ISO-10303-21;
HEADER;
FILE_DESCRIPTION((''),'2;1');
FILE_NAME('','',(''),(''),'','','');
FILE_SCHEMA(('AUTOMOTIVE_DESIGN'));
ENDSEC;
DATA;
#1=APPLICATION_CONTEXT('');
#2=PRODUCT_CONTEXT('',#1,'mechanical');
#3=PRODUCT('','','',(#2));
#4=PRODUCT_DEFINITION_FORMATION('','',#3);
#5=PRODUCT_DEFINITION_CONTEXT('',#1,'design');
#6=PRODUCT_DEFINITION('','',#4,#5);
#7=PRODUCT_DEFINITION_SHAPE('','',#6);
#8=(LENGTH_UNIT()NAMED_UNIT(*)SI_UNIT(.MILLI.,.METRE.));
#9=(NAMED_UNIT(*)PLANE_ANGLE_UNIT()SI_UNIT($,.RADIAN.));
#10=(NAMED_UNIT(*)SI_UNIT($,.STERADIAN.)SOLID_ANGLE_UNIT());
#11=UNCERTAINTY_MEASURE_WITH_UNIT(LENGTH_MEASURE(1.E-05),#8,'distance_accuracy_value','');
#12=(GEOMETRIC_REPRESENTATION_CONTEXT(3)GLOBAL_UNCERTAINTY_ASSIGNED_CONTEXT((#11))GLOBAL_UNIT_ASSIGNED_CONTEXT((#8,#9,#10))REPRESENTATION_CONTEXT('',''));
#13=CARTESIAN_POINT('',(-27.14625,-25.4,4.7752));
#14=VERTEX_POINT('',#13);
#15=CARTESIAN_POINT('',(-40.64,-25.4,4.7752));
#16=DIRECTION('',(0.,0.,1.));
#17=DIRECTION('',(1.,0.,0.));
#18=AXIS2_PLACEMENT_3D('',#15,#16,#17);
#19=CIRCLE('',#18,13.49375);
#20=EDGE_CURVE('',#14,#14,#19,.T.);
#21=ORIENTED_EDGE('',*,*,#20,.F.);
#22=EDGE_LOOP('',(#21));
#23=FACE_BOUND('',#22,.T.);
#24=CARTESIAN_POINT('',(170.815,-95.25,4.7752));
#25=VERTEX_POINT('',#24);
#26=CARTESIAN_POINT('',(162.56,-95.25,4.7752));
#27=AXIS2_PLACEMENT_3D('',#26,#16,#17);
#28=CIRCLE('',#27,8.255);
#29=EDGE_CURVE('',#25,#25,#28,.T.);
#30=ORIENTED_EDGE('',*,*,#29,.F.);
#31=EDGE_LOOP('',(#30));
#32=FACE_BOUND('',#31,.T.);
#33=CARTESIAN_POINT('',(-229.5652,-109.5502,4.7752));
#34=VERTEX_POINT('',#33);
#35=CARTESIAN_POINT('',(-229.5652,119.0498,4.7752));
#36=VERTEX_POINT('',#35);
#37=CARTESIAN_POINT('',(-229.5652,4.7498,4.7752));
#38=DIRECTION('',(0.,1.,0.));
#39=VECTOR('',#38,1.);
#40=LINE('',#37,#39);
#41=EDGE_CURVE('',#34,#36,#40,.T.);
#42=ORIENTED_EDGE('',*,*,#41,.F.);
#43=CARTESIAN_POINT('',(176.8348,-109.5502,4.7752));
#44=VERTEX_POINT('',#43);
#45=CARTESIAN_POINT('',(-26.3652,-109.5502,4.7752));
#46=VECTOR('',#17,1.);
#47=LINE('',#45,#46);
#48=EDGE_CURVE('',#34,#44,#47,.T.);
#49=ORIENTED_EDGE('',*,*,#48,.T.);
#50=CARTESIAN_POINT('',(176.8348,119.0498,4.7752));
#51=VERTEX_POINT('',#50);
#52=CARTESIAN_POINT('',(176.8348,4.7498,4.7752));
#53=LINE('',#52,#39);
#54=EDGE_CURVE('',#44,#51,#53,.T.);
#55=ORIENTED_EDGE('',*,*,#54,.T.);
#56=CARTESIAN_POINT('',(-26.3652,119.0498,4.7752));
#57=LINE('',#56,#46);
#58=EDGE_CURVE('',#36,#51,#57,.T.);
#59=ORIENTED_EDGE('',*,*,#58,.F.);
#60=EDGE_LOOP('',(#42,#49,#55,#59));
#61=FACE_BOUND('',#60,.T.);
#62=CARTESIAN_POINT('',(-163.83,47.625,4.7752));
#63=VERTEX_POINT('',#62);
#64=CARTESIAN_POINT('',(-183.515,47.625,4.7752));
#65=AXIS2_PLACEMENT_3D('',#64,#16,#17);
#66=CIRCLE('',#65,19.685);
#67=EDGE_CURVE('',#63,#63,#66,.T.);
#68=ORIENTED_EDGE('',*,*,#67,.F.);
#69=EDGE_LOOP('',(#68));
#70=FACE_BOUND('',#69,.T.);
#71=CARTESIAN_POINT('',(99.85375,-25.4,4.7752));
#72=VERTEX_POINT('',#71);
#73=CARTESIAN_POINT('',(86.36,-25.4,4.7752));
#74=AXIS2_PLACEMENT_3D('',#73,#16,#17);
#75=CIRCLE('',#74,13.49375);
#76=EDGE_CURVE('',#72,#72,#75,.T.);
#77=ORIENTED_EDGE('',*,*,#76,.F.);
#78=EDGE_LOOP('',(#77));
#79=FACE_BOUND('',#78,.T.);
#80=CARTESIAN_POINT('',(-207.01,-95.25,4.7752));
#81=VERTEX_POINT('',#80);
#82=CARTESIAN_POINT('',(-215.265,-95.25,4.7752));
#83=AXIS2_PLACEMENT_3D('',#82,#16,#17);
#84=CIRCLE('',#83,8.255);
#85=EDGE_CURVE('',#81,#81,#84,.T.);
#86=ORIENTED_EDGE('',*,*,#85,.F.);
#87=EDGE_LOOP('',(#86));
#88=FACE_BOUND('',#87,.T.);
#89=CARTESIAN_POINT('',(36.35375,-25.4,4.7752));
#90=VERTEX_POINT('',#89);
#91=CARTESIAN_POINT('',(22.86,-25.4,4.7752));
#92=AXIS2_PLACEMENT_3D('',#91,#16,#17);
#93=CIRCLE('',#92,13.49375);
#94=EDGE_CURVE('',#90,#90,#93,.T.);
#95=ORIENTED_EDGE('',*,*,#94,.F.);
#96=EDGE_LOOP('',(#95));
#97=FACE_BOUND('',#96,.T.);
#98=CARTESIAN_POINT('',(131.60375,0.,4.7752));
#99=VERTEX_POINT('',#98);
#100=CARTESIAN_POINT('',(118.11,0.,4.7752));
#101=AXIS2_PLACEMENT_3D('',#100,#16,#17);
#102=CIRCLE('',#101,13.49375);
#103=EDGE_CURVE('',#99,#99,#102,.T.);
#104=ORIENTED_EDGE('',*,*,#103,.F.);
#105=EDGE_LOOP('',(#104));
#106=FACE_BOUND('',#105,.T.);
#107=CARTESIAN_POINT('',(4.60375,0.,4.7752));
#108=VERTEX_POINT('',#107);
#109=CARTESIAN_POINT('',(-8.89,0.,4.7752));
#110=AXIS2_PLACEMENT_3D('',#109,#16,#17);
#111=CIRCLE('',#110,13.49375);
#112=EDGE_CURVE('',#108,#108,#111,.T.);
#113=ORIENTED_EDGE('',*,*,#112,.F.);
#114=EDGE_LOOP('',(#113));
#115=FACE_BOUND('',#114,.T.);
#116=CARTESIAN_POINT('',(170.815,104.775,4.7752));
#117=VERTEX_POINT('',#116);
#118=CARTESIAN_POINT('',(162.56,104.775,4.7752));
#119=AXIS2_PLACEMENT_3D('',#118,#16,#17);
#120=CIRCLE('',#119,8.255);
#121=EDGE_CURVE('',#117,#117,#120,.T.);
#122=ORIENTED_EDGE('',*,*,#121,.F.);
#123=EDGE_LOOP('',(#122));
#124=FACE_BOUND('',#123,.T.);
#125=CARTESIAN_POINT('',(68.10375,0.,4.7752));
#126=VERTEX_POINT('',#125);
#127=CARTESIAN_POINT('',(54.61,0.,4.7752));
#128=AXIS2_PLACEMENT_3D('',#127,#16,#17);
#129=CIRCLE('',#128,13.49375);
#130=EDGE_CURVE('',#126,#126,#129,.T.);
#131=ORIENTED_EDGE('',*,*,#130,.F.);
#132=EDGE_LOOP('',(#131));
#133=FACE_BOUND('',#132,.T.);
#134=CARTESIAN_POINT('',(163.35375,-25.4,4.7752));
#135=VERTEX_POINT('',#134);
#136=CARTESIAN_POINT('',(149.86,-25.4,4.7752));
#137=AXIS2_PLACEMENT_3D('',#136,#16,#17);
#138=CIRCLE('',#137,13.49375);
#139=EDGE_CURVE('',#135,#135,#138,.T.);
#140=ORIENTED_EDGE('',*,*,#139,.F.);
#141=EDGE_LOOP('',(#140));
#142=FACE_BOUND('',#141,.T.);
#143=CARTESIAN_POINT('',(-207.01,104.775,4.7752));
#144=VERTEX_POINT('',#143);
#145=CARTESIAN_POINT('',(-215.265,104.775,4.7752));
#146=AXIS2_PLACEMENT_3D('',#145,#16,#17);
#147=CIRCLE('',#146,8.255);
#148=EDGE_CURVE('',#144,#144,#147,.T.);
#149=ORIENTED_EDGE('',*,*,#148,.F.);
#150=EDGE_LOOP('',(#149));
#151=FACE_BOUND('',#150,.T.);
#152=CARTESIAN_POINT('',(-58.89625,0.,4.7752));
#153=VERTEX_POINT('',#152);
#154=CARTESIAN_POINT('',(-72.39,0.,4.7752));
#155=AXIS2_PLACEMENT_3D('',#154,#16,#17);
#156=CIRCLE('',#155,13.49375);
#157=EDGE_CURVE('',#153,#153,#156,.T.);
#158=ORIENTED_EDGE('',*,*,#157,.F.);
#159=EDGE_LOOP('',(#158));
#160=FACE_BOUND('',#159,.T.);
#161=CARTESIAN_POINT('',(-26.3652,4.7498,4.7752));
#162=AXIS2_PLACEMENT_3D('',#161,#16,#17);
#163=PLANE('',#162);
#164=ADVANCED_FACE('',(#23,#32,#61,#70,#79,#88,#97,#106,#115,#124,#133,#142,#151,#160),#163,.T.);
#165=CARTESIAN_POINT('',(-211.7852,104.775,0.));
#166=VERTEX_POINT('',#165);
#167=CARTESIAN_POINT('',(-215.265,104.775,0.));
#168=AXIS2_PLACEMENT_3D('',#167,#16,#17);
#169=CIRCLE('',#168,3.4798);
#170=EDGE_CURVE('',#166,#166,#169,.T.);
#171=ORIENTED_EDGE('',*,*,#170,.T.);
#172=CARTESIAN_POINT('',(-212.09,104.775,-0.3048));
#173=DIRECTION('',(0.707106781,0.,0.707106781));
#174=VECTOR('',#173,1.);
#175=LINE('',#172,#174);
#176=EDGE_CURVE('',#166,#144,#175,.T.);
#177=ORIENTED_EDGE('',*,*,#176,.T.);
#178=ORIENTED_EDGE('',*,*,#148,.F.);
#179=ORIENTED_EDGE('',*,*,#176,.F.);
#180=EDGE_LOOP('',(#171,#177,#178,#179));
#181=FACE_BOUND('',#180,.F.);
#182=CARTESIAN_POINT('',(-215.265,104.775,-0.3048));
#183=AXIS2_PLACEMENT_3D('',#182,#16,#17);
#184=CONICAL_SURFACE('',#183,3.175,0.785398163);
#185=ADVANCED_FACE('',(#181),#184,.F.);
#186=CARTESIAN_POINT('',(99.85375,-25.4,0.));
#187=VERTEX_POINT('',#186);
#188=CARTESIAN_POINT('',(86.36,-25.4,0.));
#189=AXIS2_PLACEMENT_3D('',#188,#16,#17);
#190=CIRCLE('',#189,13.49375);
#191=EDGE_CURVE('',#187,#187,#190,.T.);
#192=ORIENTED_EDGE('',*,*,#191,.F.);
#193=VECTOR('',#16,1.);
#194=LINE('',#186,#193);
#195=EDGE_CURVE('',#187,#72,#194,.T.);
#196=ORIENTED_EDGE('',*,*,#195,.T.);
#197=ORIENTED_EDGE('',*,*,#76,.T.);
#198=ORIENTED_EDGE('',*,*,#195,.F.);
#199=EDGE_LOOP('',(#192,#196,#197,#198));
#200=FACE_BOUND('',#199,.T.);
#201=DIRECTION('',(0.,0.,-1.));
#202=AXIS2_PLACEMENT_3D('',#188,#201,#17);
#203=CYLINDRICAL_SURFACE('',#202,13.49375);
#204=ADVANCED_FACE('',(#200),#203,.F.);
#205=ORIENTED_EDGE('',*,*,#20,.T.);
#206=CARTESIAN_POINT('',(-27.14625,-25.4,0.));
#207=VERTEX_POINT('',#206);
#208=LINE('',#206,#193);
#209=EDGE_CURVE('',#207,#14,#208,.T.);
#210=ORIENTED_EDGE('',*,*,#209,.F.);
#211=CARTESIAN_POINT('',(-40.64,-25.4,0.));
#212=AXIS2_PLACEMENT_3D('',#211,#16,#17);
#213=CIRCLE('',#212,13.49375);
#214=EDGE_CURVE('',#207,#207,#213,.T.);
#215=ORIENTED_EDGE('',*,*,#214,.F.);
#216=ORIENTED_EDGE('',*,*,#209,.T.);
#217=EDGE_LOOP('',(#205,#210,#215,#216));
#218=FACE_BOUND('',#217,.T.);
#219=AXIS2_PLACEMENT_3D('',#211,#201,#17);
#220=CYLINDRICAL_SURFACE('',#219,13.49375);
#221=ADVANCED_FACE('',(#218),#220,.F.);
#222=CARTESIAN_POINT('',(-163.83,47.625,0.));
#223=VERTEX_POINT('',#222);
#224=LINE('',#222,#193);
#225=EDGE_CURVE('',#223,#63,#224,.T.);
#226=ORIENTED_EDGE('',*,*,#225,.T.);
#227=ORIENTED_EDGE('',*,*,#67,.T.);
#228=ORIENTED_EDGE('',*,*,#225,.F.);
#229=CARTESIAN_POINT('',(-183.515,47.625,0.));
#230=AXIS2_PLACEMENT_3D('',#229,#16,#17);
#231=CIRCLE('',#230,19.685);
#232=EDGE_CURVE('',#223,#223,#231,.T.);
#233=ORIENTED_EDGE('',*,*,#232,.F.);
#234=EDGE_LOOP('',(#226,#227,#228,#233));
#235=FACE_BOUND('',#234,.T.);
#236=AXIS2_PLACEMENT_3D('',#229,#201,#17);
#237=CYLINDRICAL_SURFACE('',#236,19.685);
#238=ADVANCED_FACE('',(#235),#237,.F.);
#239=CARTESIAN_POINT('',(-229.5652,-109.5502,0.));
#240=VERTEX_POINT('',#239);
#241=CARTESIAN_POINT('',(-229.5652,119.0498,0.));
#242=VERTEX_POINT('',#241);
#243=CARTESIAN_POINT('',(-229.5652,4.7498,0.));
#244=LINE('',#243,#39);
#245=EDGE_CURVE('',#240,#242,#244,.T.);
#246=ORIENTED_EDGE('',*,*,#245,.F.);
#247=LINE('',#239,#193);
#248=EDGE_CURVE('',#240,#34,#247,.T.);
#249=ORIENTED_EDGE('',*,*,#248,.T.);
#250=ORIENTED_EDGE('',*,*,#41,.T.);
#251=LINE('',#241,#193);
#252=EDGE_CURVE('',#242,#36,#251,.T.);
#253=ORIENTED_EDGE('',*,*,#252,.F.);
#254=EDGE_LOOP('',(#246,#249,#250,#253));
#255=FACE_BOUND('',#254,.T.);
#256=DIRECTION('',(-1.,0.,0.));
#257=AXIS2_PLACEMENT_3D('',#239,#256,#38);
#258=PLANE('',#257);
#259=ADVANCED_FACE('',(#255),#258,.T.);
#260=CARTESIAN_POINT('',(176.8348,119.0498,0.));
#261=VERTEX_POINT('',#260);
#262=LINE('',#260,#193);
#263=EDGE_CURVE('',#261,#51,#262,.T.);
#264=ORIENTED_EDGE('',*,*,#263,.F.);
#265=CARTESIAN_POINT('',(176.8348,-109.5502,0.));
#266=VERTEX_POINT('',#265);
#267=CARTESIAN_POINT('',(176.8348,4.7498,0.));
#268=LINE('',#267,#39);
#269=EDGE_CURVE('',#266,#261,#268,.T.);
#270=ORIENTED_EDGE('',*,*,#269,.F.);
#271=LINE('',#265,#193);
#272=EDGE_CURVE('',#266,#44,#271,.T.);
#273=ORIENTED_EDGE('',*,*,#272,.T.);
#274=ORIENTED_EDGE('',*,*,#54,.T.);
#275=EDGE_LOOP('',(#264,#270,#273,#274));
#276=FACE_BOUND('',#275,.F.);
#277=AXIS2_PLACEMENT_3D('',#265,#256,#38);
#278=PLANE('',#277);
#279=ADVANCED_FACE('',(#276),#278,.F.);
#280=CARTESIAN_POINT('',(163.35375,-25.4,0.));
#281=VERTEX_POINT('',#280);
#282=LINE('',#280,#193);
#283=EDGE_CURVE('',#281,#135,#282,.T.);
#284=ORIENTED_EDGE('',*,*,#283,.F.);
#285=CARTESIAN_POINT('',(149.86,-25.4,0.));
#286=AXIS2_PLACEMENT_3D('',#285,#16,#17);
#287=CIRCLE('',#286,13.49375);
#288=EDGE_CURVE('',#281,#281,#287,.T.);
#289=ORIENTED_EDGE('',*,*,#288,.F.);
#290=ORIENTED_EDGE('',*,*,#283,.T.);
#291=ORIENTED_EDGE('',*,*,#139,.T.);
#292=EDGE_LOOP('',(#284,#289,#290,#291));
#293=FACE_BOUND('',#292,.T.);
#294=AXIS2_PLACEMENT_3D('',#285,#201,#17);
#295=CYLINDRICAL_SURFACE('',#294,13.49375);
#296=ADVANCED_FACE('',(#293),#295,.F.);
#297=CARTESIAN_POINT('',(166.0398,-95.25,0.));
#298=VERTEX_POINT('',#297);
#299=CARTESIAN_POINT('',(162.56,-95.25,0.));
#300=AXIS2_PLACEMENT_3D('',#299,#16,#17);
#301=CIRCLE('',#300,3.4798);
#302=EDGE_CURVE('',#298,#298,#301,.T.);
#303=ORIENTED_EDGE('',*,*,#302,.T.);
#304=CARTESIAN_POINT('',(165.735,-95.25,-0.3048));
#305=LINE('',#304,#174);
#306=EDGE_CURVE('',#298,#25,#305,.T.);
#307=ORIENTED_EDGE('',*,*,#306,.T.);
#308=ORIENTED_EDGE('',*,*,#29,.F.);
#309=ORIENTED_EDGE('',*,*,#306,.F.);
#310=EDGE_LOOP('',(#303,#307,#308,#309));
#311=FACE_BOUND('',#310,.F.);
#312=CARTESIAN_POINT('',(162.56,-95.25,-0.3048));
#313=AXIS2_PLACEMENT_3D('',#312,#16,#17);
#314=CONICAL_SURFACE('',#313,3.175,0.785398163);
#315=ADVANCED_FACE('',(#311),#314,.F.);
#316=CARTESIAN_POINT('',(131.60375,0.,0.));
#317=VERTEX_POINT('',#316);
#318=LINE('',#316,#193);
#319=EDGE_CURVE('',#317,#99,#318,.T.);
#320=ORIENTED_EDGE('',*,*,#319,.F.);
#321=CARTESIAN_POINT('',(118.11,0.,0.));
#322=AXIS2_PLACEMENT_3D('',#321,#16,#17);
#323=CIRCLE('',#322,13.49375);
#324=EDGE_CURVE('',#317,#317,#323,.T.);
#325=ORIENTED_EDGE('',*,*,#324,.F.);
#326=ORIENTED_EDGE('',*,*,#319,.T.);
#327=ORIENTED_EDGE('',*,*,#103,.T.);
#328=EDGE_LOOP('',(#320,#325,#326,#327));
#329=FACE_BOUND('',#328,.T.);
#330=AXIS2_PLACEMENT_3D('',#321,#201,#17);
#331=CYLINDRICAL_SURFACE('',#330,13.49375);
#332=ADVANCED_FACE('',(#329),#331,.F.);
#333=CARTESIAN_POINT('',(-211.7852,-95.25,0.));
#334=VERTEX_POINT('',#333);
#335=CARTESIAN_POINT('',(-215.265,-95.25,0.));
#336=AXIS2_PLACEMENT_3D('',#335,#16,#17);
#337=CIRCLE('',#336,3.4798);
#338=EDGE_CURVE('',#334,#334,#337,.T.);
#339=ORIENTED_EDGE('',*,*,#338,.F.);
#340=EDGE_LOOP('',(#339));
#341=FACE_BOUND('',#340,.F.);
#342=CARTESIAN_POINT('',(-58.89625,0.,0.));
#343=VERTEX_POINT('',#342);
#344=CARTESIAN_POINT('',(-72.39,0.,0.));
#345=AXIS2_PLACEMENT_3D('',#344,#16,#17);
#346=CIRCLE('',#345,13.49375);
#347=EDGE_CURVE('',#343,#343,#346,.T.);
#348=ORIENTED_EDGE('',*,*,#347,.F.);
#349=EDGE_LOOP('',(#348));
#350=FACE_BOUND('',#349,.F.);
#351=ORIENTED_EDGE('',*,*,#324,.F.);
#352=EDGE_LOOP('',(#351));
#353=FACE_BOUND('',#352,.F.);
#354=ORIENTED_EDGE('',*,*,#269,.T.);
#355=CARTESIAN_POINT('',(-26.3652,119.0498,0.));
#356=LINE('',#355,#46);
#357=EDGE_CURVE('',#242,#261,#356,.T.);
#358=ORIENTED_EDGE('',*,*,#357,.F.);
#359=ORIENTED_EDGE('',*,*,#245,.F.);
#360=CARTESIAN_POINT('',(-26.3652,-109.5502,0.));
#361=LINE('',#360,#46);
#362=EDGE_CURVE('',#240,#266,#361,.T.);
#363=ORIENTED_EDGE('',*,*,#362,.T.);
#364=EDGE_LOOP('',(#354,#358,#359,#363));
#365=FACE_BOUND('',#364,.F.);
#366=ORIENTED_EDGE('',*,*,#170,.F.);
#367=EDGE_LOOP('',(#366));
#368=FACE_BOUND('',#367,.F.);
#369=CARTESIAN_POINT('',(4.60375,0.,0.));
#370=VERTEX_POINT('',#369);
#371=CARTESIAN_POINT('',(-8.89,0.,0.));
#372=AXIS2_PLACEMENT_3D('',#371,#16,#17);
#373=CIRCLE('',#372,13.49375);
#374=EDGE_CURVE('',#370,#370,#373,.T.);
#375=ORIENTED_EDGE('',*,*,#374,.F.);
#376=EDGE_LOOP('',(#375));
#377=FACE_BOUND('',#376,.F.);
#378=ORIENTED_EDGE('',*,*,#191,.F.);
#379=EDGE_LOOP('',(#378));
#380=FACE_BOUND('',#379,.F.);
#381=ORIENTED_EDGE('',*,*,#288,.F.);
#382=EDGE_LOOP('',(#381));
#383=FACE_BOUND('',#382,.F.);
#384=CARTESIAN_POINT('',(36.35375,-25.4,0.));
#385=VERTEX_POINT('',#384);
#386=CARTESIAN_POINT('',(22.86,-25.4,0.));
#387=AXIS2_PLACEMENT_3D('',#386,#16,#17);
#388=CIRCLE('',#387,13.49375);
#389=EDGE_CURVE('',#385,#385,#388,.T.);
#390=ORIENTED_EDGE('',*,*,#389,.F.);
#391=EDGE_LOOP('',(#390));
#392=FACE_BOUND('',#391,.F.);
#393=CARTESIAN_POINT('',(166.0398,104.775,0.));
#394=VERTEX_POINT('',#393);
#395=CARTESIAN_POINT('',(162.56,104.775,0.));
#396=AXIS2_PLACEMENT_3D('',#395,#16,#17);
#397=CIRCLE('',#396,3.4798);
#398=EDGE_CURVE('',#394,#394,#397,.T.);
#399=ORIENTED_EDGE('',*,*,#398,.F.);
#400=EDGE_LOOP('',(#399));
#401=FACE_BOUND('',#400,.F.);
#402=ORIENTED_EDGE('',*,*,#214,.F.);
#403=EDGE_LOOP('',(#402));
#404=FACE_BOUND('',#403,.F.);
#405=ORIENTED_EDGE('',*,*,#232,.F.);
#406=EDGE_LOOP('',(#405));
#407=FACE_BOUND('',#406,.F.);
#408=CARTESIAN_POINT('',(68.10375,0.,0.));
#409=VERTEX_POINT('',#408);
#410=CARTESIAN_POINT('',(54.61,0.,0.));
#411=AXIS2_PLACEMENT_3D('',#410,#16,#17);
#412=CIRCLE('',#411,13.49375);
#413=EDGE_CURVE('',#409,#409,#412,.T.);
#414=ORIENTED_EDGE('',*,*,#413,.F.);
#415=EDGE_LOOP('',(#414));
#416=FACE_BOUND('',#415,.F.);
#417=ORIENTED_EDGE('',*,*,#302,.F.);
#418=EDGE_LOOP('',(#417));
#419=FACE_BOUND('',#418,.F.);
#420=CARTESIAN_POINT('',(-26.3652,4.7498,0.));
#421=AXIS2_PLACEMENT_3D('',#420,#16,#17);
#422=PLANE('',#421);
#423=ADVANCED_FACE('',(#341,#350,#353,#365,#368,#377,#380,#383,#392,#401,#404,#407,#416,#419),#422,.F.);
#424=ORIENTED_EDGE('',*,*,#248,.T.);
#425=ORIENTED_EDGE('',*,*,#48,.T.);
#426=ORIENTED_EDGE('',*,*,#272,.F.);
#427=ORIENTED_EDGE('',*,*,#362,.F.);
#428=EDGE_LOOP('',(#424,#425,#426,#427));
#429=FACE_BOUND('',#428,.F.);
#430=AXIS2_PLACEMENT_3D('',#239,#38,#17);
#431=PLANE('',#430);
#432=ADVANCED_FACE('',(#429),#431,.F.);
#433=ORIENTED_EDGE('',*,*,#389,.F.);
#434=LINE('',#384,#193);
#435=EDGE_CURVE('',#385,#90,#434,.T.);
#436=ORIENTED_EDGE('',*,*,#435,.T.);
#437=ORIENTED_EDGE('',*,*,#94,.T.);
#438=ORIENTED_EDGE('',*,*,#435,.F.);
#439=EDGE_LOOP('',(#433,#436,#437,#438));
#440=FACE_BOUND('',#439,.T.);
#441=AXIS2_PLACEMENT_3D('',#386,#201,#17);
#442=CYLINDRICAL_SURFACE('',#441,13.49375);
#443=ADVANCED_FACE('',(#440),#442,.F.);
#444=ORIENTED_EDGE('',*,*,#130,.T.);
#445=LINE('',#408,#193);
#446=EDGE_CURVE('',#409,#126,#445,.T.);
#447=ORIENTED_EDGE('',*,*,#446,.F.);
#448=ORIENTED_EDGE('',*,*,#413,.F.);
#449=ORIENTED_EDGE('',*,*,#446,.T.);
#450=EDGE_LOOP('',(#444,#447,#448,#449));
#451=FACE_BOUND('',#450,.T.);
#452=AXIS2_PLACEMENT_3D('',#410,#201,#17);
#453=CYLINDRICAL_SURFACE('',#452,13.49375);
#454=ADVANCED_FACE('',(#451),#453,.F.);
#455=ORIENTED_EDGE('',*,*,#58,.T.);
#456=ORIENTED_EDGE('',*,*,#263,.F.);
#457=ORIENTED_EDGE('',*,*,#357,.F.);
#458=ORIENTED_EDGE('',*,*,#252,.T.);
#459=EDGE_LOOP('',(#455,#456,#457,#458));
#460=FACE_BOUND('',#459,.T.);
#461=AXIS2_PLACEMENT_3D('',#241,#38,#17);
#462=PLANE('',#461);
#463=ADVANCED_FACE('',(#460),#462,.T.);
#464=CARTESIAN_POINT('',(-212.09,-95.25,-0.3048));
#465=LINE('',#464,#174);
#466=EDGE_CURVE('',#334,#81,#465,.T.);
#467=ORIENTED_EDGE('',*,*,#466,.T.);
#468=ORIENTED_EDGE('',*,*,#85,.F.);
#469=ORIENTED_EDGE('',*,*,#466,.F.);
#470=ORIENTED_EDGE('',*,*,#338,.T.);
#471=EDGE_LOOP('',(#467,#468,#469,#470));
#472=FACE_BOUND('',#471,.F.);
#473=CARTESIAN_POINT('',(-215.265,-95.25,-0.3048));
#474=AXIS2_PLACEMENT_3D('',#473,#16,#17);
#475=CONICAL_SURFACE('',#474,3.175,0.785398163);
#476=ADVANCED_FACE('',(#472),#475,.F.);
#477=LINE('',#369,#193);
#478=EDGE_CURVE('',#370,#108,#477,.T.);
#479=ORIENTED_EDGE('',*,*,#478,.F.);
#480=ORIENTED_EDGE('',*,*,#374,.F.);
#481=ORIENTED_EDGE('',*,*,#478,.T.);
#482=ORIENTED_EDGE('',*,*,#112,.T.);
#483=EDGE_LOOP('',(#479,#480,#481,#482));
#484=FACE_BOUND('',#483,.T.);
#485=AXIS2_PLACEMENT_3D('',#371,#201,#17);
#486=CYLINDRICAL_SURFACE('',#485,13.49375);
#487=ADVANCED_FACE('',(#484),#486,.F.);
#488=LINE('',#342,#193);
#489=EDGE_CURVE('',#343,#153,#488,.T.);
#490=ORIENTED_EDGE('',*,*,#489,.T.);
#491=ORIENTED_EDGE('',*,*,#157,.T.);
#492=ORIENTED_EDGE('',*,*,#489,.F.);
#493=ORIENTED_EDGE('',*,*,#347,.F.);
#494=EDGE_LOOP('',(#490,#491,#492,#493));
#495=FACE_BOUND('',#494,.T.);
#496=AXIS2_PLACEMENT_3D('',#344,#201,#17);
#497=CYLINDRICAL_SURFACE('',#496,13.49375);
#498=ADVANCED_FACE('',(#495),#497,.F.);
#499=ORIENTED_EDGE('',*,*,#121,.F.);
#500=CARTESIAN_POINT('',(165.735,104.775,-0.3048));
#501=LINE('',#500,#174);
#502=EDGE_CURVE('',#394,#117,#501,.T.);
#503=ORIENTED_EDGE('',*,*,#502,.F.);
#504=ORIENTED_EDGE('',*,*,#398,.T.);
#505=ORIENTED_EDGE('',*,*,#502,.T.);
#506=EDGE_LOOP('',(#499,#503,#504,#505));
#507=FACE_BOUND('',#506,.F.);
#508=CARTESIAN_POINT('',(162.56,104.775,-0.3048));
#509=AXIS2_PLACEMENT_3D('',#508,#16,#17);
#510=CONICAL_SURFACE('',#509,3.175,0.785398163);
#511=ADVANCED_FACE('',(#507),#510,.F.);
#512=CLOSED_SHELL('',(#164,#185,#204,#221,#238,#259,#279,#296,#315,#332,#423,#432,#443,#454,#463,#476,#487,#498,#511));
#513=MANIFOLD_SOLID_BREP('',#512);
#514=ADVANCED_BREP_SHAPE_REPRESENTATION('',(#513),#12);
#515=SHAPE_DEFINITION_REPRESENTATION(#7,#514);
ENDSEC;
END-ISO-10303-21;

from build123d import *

# Parameters (mm, degrees)
F0_W     = 406.4
F0_H     = 228.6
F0_W_2   = 396.875
F0_H_2   = 219.075
F0_R     = 3.175
F0_R_2   = 13.49375
F0_R_3   = 19.685
F1_DEPTH = 4.7752


# Not quite as in the source:
# - a fillet or chamfer that OpenCascade refuses, or shapes differently, is made with other operations: its cross-section is extruded or revolved along the edge and cut away or added


with BuildPart() as f1:
    # F0 (on Top) → F1 (new body)
    with BuildSketch(Plane.XY):
        with Locations((-26.3652, 4.7498)):
            Rectangle(F0_W, F0_H)
        with Locations((-26.3525, 4.7625)):
            Rectangle(F0_W_2, F0_H_2, mode=Mode.SUBTRACT)
        with Locations((-26.3525, 4.7625)):
            Rectangle(F0_W_2, F0_H_2)
        with Locations((-215.265, -95.25)):
            Circle(F0_R, mode=Mode.SUBTRACT)
        with Locations((-40.64, -25.4)):
            Circle(F0_R_2, mode=Mode.SUBTRACT)
        with Locations((-72.39, 0)):
            Circle(F0_R_2, mode=Mode.SUBTRACT)
        with Locations((162.56, -95.25)):
            Circle(F0_R, mode=Mode.SUBTRACT)
        with Locations((22.86, -25.4)):
            Circle(F0_R_2, mode=Mode.SUBTRACT)
        with Locations((-8.89, 0)):
            Circle(F0_R_2, mode=Mode.SUBTRACT)
        with Locations((54.61, 0)):
            Circle(F0_R_2, mode=Mode.SUBTRACT)
        with Locations((86.36, -25.4)):
            Circle(F0_R_2, mode=Mode.SUBTRACT)
        with Locations((149.86, -25.4)):
            Circle(F0_R_2, mode=Mode.SUBTRACT)
        with Locations((118.11, 0)):
            Circle(F0_R_2, mode=Mode.SUBTRACT)
        with Locations((-183.515, 47.625)):
            Circle(F0_R_3, mode=Mode.SUBTRACT)
        with Locations((-215.265, 104.775)):
            Circle(F0_R, mode=Mode.SUBTRACT)
        with Locations((162.56, 104.775)):
            Circle(F0_R, mode=Mode.SUBTRACT)
    extrude(amount=F1_DEPTH)

    # F2: chamfer of 5.08 on 4 edges, made by hand

    # F2_s1 → F2_t2 (revolve, cut)
    with BuildSketch(Plane.XZ.offset(95.25)):
        Polygon((-212.09, -0.3048), (-207.01, 4.7752), (-212.09, 4.7752), align=None)
    revolve(axis=Axis((-215.265, -95.25, 4.7752), (0, 0, 1)), mode=Mode.SUBTRACT)

    # F2_s3 → F2_t4 (revolve, cut)
    with BuildSketch(Plane.XZ.offset(-104.775)):
        Polygon((-212.09, -0.3048), (-207.01, 4.7752), (-212.09, 4.7752), align=None)
    revolve(axis=Axis((-215.265, 104.775, 4.7752), (0, 0, 1)), mode=Mode.SUBTRACT)

    # F2_s5 → F2_t6 (revolve, cut)
    with BuildSketch(Plane.XZ.offset(-104.775)):
        Polygon((165.735, -0.3048), (170.815, 4.7752), (165.735, 4.7752), align=None)
    revolve(axis=Axis((162.56, 104.775, 4.7752), (0, 0, 1)), mode=Mode.SUBTRACT)

    # F2_s7 → F2_t8 (revolve, cut)
    with BuildSketch(Plane.XZ.offset(95.25)):
        Polygon((165.735, -0.3048), (170.815, 4.7752), (165.735, 4.7752), align=None)
    revolve(axis=Axis((162.56, -95.25, 4.7752), (0, 0, 1)), mode=Mode.SUBTRACT)


solid = f1.part
